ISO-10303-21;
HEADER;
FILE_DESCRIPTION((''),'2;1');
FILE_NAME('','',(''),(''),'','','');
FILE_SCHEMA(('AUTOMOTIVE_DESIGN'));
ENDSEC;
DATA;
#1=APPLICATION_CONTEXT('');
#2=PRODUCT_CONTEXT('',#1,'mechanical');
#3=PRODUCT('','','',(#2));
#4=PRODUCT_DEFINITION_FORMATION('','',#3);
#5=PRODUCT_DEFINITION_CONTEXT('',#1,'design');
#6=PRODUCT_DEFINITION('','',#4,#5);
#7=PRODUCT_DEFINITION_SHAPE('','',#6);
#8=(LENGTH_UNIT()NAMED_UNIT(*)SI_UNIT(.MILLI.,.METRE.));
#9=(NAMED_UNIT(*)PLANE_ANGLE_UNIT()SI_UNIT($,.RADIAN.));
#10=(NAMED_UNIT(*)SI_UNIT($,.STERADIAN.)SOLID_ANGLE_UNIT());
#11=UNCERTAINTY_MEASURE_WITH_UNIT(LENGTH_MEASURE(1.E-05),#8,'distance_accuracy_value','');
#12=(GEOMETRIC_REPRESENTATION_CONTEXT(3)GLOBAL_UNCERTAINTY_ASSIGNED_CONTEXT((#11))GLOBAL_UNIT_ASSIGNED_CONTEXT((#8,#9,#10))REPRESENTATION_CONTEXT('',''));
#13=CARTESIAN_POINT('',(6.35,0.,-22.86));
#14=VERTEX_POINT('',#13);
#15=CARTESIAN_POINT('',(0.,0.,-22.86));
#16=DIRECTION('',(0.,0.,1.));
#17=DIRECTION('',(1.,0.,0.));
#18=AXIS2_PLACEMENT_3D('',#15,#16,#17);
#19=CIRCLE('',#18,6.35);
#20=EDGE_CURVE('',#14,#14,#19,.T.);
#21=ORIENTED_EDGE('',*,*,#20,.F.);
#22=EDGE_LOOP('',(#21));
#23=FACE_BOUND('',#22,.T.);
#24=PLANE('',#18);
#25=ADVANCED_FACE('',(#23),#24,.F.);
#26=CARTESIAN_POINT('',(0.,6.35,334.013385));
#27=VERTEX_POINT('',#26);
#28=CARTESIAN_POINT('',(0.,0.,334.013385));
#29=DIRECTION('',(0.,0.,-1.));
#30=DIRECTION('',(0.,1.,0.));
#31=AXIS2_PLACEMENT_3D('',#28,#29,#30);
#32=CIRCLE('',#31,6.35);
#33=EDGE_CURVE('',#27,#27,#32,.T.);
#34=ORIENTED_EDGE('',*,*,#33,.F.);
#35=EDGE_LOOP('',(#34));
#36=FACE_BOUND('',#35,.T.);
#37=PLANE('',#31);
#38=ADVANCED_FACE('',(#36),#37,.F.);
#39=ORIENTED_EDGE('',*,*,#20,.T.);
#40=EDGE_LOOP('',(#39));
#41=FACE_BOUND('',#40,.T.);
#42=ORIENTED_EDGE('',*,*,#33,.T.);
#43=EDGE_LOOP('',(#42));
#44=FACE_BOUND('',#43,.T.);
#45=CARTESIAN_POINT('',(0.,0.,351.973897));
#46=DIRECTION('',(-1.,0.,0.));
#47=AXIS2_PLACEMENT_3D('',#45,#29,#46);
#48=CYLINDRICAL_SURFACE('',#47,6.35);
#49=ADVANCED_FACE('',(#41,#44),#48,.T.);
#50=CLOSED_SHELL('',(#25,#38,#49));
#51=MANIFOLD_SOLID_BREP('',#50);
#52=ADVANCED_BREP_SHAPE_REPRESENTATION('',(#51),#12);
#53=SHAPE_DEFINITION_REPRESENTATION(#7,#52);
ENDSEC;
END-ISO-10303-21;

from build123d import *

# Parameters (mm, degrees)
BOSS_EXTRUDE1_OUTLINE_R = 6.35
BOSS_EXTRUDE1_DEPTH     = 356.873385235


# Read off the part's stored shape, not the designer's step: Boss-Extrude1
with BuildPart() as part:
    # Boss-Extrude1 outline → Boss-Extrude1 (new body)
    with BuildSketch(Plane.XY.offset(-22.86)):
        Circle(BOSS_EXTRUDE1_OUTLINE_R)
    extrude(amount=BOSS_EXTRUDE1_DEPTH)


solid = part.part
